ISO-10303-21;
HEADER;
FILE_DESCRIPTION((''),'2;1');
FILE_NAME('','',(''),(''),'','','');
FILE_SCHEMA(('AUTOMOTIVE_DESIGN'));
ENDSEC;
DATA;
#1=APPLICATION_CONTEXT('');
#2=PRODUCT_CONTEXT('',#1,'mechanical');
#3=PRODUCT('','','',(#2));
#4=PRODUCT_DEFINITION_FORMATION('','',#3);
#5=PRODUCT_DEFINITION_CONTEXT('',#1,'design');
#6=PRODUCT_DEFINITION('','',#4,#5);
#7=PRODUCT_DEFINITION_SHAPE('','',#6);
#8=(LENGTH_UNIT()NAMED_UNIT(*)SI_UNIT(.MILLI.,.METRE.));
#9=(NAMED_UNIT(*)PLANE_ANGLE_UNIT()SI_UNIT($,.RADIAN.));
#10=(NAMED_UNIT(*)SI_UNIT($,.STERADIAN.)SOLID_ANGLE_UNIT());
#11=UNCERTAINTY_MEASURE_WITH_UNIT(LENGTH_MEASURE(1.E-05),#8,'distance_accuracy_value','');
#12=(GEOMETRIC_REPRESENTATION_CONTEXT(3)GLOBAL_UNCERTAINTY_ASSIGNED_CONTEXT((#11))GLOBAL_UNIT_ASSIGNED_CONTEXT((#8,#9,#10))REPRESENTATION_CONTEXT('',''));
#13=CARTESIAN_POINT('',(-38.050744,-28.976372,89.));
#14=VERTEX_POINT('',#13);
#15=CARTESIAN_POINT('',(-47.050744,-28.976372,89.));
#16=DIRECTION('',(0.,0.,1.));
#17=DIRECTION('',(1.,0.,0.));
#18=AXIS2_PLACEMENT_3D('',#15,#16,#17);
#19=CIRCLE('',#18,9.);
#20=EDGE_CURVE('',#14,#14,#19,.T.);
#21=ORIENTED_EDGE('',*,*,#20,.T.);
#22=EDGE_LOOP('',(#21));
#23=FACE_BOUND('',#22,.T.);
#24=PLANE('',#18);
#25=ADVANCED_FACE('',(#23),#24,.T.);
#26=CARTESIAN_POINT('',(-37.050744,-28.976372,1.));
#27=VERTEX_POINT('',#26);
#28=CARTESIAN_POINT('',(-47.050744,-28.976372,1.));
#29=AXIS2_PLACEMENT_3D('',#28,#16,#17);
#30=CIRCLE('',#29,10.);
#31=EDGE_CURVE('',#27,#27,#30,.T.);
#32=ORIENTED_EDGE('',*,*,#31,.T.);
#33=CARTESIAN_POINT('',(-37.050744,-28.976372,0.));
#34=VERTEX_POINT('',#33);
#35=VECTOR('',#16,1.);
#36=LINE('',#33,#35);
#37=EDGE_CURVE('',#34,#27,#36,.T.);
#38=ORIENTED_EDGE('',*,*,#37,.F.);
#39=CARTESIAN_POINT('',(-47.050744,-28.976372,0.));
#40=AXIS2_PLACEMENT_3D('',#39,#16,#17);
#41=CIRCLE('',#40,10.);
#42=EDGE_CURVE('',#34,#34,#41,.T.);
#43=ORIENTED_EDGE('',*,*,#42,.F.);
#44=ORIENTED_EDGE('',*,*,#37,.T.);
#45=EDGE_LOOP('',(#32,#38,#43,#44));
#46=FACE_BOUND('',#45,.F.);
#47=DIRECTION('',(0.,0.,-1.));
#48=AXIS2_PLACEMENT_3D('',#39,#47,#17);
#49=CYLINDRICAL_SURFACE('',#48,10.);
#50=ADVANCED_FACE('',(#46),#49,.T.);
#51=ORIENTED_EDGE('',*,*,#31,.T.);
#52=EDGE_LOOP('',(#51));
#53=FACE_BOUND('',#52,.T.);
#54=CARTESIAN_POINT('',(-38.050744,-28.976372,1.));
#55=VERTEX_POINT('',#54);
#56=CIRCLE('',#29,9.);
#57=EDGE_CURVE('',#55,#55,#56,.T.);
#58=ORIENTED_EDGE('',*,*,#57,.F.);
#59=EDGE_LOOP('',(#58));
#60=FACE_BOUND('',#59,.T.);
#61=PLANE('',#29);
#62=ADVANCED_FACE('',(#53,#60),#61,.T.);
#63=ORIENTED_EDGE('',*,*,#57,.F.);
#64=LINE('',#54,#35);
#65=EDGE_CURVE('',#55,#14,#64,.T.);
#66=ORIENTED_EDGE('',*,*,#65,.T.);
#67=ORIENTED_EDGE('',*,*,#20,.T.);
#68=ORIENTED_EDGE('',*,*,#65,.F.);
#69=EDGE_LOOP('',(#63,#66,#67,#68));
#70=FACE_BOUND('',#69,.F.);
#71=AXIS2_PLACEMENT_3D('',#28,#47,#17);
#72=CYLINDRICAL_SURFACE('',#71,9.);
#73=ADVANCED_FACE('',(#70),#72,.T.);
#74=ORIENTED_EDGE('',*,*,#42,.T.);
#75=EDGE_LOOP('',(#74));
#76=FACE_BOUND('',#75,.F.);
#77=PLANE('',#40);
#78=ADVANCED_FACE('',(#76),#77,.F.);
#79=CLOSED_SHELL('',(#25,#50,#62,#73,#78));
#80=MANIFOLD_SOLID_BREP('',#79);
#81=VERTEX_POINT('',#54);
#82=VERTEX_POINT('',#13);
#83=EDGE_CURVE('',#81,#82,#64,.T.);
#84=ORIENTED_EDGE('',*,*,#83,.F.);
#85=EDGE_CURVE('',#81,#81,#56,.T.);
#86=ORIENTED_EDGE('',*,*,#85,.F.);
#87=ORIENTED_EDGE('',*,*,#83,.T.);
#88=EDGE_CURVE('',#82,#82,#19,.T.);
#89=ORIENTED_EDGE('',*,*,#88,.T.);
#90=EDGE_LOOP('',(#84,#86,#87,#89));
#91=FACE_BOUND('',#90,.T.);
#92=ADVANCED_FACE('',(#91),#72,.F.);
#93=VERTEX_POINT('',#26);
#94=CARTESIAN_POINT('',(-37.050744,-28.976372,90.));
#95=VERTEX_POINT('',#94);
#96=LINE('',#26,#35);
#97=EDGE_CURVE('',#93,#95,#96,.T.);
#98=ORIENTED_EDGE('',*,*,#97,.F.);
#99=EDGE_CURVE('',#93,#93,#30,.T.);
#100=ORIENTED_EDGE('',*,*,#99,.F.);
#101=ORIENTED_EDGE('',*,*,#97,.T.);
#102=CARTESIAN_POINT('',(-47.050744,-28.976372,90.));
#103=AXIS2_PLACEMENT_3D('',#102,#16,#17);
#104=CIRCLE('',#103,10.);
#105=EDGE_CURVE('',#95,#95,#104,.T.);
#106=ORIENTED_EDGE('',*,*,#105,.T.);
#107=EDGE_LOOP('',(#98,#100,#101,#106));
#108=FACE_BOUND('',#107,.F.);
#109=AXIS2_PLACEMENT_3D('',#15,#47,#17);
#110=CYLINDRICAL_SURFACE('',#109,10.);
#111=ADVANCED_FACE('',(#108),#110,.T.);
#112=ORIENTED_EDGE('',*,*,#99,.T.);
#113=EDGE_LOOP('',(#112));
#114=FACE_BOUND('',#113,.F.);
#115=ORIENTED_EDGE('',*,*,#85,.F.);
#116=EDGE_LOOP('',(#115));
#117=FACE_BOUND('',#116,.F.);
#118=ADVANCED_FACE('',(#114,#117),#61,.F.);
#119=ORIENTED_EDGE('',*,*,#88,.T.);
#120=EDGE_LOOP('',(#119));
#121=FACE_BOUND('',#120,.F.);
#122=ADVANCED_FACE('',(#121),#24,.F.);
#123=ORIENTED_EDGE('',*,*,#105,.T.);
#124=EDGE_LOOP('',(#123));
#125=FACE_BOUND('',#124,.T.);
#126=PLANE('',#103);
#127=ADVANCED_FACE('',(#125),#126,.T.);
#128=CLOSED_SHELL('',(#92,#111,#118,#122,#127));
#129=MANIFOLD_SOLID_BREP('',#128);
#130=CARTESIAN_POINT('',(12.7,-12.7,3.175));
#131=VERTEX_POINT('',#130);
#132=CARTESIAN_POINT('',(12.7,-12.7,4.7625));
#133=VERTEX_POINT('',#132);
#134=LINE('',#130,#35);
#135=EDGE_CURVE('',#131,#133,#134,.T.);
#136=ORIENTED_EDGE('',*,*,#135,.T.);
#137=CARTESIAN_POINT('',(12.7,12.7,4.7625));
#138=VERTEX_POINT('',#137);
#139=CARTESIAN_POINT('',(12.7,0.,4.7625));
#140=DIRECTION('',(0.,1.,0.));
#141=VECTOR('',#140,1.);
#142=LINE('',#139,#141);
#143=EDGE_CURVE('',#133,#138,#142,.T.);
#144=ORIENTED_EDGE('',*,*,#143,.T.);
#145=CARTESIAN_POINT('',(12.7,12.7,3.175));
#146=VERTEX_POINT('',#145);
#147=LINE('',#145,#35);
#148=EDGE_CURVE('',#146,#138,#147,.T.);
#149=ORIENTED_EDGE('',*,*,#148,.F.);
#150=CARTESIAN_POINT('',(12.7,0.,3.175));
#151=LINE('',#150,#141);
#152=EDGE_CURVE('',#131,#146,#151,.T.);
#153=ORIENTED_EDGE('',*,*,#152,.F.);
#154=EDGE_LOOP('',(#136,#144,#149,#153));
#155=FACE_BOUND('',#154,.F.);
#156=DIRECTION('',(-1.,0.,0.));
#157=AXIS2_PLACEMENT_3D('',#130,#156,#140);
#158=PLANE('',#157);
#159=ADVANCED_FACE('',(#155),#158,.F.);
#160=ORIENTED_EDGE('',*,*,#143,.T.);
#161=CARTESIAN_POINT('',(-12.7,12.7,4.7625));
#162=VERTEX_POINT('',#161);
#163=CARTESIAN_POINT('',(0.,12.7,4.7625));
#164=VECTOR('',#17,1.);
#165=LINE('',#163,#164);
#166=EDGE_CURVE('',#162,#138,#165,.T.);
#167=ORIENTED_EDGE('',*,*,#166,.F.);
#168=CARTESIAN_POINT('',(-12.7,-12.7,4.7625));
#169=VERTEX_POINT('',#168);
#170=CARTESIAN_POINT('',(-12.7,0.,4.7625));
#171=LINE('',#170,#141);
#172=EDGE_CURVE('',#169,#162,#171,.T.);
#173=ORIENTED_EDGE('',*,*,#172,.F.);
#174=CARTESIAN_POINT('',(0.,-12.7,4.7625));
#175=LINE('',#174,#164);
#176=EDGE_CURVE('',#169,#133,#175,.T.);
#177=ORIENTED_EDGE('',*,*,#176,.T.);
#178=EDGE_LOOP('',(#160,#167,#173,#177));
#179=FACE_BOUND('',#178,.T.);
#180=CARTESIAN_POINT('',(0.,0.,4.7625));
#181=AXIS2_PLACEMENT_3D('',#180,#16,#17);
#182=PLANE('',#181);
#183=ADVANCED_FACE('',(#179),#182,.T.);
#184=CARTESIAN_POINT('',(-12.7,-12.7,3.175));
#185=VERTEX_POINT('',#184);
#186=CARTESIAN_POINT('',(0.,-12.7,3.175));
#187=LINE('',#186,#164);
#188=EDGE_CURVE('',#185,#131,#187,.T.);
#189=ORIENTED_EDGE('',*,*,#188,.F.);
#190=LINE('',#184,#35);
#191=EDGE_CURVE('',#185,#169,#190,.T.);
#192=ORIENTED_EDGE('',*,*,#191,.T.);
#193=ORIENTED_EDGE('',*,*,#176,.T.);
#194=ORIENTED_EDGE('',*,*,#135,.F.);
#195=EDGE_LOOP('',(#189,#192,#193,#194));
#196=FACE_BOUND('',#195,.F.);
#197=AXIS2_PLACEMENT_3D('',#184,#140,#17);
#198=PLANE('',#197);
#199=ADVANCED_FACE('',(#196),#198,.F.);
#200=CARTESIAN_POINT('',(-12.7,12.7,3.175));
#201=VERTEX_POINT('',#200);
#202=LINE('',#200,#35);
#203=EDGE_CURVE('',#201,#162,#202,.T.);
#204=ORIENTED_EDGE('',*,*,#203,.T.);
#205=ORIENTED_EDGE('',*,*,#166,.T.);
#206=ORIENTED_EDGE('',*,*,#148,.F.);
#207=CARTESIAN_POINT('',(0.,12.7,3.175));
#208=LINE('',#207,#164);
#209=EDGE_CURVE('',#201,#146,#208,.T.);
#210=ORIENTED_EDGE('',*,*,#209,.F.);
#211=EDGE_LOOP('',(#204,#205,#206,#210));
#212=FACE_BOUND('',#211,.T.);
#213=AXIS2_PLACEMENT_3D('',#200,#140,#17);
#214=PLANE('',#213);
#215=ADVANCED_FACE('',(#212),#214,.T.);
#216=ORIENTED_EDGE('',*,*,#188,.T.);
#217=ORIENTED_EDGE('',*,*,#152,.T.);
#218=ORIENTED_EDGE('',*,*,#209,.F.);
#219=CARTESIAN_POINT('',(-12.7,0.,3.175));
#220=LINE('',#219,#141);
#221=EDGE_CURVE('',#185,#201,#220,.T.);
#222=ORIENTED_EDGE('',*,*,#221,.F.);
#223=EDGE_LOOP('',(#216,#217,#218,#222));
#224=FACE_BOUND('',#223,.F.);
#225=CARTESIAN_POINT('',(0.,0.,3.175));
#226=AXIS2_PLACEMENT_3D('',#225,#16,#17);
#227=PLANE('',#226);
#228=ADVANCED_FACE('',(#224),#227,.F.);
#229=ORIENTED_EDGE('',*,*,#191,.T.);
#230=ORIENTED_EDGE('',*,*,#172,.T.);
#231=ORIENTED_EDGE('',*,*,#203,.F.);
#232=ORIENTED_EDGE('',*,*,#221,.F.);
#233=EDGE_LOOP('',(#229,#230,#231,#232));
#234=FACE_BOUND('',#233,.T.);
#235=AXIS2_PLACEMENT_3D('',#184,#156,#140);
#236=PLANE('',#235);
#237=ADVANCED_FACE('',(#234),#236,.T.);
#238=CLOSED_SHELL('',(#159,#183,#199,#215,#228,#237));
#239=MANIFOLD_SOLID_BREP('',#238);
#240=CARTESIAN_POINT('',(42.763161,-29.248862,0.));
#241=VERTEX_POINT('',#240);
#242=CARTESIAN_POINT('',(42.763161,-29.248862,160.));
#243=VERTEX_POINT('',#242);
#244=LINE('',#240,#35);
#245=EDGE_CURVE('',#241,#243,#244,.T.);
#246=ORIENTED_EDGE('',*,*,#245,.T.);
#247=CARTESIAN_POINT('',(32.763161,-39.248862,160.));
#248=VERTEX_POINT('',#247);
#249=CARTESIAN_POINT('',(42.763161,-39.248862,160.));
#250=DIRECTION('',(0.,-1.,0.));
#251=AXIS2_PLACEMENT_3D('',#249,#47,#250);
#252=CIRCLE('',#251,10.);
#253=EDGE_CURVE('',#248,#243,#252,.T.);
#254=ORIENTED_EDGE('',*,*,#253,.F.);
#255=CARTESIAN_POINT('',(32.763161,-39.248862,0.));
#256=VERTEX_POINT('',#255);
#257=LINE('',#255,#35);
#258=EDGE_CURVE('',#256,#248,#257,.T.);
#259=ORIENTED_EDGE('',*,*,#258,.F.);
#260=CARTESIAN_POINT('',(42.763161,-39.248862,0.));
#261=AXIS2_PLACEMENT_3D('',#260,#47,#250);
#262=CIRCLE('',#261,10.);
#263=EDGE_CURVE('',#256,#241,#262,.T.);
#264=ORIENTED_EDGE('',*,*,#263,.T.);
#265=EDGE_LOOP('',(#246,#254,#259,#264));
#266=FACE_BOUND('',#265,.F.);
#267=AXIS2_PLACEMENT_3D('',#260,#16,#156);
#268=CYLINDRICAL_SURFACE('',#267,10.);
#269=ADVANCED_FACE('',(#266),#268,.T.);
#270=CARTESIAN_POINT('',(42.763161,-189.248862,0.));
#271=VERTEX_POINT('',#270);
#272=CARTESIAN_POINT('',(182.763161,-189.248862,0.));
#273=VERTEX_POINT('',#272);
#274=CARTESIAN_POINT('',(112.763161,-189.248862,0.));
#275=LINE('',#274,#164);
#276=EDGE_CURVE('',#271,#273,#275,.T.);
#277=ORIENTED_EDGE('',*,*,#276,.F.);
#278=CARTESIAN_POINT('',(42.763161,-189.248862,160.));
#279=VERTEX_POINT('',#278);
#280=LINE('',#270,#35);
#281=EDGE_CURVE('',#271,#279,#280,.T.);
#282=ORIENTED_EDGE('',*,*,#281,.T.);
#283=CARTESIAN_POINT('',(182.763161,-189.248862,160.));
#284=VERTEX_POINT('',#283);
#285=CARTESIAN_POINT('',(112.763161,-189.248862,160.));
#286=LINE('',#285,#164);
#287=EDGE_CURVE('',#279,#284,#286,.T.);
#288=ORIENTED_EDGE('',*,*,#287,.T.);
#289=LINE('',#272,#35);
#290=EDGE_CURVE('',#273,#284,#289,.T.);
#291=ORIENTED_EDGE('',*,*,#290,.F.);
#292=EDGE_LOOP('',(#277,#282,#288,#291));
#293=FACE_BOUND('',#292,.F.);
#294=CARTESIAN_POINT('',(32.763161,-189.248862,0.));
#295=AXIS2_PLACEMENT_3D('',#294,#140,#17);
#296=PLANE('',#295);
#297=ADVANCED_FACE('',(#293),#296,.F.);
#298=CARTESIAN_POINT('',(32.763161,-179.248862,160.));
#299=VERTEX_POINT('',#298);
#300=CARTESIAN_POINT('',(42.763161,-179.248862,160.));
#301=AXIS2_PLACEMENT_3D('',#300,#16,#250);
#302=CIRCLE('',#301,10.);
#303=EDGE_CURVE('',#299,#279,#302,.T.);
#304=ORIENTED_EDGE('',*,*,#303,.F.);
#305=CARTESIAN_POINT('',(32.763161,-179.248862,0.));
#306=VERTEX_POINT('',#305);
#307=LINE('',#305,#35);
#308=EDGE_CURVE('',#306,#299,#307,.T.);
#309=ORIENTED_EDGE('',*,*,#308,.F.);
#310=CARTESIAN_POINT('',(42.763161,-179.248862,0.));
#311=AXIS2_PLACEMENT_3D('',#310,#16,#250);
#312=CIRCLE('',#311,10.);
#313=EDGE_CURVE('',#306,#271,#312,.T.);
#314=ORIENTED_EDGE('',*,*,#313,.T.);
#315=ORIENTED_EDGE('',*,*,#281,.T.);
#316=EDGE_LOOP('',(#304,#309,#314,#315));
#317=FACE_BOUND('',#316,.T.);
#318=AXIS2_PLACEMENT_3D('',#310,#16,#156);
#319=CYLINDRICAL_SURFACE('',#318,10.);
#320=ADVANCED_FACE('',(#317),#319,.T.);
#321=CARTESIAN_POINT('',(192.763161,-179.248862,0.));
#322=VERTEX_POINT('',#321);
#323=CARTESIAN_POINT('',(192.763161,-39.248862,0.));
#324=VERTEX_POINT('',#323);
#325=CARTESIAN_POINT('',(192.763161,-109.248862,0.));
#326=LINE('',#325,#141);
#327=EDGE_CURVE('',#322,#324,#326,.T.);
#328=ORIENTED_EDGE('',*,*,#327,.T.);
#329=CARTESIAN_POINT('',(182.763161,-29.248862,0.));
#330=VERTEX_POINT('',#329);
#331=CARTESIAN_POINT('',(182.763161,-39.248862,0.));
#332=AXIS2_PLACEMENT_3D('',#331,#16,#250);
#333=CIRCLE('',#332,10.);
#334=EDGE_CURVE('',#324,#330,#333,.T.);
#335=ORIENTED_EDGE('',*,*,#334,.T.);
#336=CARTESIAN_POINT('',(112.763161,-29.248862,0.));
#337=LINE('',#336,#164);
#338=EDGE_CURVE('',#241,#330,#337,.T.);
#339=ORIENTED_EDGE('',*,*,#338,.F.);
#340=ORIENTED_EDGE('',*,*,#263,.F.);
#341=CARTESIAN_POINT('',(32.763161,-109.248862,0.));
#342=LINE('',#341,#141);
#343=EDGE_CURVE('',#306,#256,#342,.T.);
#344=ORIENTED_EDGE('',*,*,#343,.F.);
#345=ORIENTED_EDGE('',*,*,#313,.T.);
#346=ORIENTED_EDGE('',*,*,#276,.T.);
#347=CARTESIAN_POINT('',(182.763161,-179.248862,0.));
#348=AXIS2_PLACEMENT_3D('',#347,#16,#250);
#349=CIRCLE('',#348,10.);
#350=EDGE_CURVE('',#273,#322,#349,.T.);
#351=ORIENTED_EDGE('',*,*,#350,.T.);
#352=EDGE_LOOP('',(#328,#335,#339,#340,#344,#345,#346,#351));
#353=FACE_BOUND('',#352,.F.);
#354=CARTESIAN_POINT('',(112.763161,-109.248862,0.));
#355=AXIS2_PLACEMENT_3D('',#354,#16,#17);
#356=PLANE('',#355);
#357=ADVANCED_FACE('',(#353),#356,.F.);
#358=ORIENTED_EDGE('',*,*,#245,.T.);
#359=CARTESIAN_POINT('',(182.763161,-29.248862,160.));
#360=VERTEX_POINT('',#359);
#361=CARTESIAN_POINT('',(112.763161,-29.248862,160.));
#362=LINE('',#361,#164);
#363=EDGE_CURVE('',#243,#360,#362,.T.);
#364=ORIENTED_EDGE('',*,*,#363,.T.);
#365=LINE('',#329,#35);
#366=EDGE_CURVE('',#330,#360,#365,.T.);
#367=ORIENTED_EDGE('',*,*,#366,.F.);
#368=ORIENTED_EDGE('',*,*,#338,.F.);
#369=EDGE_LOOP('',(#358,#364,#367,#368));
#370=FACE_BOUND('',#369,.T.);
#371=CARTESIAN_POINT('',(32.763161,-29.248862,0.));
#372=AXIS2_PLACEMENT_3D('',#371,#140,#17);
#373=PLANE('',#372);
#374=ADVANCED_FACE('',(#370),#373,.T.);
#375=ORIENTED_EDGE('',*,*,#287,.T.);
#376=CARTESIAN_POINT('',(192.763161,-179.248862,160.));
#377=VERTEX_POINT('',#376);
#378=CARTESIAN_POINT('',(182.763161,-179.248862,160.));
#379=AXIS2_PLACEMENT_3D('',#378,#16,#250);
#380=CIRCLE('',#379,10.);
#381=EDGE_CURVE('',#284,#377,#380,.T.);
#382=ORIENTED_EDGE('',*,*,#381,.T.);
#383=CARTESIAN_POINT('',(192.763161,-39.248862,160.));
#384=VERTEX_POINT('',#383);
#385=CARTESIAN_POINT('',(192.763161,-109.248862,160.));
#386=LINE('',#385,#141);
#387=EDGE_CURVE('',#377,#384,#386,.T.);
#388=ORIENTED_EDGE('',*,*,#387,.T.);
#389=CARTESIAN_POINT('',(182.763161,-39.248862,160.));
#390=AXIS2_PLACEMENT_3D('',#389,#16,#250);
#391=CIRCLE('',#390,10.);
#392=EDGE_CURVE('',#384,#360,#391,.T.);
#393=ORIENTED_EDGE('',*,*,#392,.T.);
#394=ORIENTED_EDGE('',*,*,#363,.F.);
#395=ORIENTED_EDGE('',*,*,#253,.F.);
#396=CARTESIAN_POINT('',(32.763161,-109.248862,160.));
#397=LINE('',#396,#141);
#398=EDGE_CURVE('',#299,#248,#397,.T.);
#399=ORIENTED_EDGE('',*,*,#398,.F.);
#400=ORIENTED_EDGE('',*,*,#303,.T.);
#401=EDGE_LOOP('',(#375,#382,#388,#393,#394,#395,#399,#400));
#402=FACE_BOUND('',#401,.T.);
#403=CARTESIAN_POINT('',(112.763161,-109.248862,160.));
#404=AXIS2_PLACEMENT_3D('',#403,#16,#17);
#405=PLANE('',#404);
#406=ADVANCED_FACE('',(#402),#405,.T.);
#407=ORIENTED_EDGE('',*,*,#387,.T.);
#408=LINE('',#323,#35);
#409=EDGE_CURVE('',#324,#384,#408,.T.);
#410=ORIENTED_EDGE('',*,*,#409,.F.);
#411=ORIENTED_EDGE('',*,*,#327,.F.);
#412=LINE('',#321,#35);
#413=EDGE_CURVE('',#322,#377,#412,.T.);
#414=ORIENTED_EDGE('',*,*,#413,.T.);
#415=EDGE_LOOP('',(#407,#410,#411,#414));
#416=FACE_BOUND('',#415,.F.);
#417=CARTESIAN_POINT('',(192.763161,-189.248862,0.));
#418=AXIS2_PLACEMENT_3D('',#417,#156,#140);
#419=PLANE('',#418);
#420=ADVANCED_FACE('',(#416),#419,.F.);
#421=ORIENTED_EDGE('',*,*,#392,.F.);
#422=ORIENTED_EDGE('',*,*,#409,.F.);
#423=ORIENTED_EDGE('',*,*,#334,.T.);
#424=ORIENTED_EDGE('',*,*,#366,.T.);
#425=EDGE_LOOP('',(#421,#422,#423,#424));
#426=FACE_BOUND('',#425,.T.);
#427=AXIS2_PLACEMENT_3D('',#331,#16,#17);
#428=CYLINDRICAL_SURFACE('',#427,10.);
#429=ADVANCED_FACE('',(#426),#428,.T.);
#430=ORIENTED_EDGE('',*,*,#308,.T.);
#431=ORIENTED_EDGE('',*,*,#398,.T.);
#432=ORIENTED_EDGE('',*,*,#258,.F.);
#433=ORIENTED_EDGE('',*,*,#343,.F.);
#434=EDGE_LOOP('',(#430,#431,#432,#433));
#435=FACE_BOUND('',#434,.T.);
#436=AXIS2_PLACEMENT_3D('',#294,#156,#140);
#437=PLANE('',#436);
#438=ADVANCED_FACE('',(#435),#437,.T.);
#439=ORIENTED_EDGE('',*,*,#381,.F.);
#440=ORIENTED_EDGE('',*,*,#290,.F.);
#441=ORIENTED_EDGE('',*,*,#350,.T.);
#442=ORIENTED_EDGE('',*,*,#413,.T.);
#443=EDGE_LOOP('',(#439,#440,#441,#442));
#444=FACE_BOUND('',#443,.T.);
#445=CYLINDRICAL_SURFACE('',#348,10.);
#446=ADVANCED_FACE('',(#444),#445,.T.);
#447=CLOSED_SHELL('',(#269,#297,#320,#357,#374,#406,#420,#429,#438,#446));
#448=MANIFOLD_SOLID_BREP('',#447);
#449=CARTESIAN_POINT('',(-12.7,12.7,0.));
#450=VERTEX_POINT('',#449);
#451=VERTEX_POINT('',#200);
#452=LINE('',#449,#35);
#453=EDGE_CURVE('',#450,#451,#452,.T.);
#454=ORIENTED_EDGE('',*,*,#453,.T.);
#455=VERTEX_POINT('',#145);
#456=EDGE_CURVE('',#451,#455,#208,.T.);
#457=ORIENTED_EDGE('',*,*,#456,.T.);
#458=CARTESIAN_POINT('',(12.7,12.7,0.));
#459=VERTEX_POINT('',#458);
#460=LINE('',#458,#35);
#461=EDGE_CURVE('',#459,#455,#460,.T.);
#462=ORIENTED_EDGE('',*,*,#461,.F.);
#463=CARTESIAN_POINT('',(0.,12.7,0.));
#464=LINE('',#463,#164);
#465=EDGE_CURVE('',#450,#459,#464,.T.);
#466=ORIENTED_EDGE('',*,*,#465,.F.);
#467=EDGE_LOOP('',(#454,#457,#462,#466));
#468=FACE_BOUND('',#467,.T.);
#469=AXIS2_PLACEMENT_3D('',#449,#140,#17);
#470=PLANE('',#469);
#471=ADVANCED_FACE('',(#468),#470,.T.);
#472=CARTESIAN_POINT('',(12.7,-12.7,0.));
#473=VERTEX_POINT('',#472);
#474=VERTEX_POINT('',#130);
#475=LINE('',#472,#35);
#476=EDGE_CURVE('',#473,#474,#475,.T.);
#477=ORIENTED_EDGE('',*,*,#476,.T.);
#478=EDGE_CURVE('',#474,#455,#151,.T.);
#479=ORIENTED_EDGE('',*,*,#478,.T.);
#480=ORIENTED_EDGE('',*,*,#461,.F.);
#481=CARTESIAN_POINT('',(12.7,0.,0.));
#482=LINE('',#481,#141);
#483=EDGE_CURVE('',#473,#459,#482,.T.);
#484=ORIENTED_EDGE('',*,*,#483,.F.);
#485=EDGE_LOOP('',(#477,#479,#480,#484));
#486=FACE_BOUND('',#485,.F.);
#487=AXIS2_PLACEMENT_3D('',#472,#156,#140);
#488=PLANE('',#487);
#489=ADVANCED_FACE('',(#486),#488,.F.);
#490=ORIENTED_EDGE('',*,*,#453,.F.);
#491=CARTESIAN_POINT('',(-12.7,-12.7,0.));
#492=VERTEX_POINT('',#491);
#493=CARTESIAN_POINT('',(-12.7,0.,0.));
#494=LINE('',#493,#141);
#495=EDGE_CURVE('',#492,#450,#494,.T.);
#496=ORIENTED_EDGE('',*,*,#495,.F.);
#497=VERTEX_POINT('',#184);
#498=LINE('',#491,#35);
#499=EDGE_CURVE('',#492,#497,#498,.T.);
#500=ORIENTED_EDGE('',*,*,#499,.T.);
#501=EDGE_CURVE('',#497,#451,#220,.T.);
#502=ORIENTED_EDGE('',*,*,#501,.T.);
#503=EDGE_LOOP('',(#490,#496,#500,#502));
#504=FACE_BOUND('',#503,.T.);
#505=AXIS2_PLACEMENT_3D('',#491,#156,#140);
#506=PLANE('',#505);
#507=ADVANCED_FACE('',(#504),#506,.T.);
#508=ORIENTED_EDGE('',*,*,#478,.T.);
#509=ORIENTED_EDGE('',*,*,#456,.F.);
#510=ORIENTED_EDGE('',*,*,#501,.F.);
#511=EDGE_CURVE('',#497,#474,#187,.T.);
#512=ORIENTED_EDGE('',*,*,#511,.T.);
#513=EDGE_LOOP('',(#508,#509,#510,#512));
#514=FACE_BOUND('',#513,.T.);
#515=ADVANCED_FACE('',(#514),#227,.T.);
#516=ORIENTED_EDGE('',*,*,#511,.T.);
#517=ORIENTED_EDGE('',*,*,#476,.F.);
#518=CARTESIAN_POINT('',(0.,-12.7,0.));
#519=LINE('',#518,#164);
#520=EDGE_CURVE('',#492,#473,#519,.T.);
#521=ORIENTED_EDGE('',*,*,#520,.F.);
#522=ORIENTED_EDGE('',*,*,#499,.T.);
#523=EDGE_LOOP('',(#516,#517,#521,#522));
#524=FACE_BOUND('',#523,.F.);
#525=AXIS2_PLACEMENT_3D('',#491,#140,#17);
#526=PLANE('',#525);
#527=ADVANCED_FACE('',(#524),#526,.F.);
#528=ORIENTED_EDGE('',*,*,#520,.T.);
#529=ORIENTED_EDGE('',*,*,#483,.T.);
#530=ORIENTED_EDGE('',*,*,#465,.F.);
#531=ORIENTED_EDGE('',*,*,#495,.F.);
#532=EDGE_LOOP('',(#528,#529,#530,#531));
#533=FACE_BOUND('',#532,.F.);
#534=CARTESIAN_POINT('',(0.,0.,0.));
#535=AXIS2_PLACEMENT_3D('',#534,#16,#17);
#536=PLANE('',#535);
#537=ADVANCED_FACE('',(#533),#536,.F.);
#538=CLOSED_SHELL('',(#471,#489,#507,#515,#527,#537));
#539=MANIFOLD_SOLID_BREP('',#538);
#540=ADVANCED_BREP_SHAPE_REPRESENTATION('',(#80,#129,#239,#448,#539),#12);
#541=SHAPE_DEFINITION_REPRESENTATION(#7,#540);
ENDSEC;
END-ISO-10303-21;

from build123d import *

# Parameters (mm, degrees)
F0_W      = 25.4
F0_H      = 25.4
F1_DEPTH  = 3.175
F2_W      = 25.4
F2_H      = 25.4
F3_DEPTH  = 1.5875
F4_R      = 10
F5_DEPTH  = 1
F6_R      = 9
F7_DEPTH  = 88
F8_R      = 10
F8_R_2    = 9
F9_DEPTH  = 88
F10_R     = 10
F11_DEPTH = 1
F12_W     = 160
F12_H     = 160
F13_DEPTH = 160
F14_R     = 10


with BuildPart() as f1:
    # F0 (on Top) → F1 (new body)
    with BuildSketch(Plane.XY):
        Rectangle(F0_W, F0_H)
    extrude(amount=F1_DEPTH)


with BuildPart() as f3:
    # F2 (on face) → F3 (new body)
    with BuildSketch(Plane.XY.offset(3.175)):
        Rectangle(F2_W, F2_H)
    extrude(amount=F3_DEPTH)


with BuildPart() as f5:
    # F4 (on Top) → F5 (new body)
    with BuildSketch(Plane.XY):
        with Locations((-47.0507442951, -28.9763715118)):
            Circle(F4_R)
    extrude(amount=F5_DEPTH)

    # F6 (on face) → F7 (join)
    with BuildSketch(Plane.XY.offset(1)):
        with Locations((-47.0507442951, -28.9763715118)):
            Circle(F6_R)
    extrude(amount=F7_DEPTH)


with BuildPart() as f9:
    # F8 (on face) → F9 (new body, through all)
    with BuildSketch(Plane.XY.offset(1)):
        with Locations((-47.0507442951, -28.9763715118)):
            Circle(F8_R)
        with Locations((-47.0507442951, -28.9763715118)):
            Circle(F8_R_2, mode=Mode.SUBTRACT)
    extrude(amount=F9_DEPTH)

    # F10 (on face) → F11 (join)
    with BuildSketch(Plane.XY.offset(89)):
        with Locations((-47.0507442951, -28.9763715118)):
            Circle(F10_R)
    extrude(amount=F11_DEPTH)


with BuildPart() as f13:
    # F12 (on Top) → F13 (new body)
    with BuildSketch(Plane.XY):
        with Locations((112.7631608397, -109.2488616705)):
            Rectangle(F12_W, F12_H)
    extrude(amount=F13_DEPTH)

    # F14
    f14_edges = [f13.edges().sort_by_distance(p)[0] for p in [
        (32.763161, -189.248862, 80),
        (192.763161, -189.248862, 80),
        (192.763161, -29.248862, 80),
        (32.763161, -29.248862, 80),
    ]]
    fillet(f14_edges, radius=F14_R)


solid = Compound([f1.part, f3.part, f5.part, f9.part, f13.part])
